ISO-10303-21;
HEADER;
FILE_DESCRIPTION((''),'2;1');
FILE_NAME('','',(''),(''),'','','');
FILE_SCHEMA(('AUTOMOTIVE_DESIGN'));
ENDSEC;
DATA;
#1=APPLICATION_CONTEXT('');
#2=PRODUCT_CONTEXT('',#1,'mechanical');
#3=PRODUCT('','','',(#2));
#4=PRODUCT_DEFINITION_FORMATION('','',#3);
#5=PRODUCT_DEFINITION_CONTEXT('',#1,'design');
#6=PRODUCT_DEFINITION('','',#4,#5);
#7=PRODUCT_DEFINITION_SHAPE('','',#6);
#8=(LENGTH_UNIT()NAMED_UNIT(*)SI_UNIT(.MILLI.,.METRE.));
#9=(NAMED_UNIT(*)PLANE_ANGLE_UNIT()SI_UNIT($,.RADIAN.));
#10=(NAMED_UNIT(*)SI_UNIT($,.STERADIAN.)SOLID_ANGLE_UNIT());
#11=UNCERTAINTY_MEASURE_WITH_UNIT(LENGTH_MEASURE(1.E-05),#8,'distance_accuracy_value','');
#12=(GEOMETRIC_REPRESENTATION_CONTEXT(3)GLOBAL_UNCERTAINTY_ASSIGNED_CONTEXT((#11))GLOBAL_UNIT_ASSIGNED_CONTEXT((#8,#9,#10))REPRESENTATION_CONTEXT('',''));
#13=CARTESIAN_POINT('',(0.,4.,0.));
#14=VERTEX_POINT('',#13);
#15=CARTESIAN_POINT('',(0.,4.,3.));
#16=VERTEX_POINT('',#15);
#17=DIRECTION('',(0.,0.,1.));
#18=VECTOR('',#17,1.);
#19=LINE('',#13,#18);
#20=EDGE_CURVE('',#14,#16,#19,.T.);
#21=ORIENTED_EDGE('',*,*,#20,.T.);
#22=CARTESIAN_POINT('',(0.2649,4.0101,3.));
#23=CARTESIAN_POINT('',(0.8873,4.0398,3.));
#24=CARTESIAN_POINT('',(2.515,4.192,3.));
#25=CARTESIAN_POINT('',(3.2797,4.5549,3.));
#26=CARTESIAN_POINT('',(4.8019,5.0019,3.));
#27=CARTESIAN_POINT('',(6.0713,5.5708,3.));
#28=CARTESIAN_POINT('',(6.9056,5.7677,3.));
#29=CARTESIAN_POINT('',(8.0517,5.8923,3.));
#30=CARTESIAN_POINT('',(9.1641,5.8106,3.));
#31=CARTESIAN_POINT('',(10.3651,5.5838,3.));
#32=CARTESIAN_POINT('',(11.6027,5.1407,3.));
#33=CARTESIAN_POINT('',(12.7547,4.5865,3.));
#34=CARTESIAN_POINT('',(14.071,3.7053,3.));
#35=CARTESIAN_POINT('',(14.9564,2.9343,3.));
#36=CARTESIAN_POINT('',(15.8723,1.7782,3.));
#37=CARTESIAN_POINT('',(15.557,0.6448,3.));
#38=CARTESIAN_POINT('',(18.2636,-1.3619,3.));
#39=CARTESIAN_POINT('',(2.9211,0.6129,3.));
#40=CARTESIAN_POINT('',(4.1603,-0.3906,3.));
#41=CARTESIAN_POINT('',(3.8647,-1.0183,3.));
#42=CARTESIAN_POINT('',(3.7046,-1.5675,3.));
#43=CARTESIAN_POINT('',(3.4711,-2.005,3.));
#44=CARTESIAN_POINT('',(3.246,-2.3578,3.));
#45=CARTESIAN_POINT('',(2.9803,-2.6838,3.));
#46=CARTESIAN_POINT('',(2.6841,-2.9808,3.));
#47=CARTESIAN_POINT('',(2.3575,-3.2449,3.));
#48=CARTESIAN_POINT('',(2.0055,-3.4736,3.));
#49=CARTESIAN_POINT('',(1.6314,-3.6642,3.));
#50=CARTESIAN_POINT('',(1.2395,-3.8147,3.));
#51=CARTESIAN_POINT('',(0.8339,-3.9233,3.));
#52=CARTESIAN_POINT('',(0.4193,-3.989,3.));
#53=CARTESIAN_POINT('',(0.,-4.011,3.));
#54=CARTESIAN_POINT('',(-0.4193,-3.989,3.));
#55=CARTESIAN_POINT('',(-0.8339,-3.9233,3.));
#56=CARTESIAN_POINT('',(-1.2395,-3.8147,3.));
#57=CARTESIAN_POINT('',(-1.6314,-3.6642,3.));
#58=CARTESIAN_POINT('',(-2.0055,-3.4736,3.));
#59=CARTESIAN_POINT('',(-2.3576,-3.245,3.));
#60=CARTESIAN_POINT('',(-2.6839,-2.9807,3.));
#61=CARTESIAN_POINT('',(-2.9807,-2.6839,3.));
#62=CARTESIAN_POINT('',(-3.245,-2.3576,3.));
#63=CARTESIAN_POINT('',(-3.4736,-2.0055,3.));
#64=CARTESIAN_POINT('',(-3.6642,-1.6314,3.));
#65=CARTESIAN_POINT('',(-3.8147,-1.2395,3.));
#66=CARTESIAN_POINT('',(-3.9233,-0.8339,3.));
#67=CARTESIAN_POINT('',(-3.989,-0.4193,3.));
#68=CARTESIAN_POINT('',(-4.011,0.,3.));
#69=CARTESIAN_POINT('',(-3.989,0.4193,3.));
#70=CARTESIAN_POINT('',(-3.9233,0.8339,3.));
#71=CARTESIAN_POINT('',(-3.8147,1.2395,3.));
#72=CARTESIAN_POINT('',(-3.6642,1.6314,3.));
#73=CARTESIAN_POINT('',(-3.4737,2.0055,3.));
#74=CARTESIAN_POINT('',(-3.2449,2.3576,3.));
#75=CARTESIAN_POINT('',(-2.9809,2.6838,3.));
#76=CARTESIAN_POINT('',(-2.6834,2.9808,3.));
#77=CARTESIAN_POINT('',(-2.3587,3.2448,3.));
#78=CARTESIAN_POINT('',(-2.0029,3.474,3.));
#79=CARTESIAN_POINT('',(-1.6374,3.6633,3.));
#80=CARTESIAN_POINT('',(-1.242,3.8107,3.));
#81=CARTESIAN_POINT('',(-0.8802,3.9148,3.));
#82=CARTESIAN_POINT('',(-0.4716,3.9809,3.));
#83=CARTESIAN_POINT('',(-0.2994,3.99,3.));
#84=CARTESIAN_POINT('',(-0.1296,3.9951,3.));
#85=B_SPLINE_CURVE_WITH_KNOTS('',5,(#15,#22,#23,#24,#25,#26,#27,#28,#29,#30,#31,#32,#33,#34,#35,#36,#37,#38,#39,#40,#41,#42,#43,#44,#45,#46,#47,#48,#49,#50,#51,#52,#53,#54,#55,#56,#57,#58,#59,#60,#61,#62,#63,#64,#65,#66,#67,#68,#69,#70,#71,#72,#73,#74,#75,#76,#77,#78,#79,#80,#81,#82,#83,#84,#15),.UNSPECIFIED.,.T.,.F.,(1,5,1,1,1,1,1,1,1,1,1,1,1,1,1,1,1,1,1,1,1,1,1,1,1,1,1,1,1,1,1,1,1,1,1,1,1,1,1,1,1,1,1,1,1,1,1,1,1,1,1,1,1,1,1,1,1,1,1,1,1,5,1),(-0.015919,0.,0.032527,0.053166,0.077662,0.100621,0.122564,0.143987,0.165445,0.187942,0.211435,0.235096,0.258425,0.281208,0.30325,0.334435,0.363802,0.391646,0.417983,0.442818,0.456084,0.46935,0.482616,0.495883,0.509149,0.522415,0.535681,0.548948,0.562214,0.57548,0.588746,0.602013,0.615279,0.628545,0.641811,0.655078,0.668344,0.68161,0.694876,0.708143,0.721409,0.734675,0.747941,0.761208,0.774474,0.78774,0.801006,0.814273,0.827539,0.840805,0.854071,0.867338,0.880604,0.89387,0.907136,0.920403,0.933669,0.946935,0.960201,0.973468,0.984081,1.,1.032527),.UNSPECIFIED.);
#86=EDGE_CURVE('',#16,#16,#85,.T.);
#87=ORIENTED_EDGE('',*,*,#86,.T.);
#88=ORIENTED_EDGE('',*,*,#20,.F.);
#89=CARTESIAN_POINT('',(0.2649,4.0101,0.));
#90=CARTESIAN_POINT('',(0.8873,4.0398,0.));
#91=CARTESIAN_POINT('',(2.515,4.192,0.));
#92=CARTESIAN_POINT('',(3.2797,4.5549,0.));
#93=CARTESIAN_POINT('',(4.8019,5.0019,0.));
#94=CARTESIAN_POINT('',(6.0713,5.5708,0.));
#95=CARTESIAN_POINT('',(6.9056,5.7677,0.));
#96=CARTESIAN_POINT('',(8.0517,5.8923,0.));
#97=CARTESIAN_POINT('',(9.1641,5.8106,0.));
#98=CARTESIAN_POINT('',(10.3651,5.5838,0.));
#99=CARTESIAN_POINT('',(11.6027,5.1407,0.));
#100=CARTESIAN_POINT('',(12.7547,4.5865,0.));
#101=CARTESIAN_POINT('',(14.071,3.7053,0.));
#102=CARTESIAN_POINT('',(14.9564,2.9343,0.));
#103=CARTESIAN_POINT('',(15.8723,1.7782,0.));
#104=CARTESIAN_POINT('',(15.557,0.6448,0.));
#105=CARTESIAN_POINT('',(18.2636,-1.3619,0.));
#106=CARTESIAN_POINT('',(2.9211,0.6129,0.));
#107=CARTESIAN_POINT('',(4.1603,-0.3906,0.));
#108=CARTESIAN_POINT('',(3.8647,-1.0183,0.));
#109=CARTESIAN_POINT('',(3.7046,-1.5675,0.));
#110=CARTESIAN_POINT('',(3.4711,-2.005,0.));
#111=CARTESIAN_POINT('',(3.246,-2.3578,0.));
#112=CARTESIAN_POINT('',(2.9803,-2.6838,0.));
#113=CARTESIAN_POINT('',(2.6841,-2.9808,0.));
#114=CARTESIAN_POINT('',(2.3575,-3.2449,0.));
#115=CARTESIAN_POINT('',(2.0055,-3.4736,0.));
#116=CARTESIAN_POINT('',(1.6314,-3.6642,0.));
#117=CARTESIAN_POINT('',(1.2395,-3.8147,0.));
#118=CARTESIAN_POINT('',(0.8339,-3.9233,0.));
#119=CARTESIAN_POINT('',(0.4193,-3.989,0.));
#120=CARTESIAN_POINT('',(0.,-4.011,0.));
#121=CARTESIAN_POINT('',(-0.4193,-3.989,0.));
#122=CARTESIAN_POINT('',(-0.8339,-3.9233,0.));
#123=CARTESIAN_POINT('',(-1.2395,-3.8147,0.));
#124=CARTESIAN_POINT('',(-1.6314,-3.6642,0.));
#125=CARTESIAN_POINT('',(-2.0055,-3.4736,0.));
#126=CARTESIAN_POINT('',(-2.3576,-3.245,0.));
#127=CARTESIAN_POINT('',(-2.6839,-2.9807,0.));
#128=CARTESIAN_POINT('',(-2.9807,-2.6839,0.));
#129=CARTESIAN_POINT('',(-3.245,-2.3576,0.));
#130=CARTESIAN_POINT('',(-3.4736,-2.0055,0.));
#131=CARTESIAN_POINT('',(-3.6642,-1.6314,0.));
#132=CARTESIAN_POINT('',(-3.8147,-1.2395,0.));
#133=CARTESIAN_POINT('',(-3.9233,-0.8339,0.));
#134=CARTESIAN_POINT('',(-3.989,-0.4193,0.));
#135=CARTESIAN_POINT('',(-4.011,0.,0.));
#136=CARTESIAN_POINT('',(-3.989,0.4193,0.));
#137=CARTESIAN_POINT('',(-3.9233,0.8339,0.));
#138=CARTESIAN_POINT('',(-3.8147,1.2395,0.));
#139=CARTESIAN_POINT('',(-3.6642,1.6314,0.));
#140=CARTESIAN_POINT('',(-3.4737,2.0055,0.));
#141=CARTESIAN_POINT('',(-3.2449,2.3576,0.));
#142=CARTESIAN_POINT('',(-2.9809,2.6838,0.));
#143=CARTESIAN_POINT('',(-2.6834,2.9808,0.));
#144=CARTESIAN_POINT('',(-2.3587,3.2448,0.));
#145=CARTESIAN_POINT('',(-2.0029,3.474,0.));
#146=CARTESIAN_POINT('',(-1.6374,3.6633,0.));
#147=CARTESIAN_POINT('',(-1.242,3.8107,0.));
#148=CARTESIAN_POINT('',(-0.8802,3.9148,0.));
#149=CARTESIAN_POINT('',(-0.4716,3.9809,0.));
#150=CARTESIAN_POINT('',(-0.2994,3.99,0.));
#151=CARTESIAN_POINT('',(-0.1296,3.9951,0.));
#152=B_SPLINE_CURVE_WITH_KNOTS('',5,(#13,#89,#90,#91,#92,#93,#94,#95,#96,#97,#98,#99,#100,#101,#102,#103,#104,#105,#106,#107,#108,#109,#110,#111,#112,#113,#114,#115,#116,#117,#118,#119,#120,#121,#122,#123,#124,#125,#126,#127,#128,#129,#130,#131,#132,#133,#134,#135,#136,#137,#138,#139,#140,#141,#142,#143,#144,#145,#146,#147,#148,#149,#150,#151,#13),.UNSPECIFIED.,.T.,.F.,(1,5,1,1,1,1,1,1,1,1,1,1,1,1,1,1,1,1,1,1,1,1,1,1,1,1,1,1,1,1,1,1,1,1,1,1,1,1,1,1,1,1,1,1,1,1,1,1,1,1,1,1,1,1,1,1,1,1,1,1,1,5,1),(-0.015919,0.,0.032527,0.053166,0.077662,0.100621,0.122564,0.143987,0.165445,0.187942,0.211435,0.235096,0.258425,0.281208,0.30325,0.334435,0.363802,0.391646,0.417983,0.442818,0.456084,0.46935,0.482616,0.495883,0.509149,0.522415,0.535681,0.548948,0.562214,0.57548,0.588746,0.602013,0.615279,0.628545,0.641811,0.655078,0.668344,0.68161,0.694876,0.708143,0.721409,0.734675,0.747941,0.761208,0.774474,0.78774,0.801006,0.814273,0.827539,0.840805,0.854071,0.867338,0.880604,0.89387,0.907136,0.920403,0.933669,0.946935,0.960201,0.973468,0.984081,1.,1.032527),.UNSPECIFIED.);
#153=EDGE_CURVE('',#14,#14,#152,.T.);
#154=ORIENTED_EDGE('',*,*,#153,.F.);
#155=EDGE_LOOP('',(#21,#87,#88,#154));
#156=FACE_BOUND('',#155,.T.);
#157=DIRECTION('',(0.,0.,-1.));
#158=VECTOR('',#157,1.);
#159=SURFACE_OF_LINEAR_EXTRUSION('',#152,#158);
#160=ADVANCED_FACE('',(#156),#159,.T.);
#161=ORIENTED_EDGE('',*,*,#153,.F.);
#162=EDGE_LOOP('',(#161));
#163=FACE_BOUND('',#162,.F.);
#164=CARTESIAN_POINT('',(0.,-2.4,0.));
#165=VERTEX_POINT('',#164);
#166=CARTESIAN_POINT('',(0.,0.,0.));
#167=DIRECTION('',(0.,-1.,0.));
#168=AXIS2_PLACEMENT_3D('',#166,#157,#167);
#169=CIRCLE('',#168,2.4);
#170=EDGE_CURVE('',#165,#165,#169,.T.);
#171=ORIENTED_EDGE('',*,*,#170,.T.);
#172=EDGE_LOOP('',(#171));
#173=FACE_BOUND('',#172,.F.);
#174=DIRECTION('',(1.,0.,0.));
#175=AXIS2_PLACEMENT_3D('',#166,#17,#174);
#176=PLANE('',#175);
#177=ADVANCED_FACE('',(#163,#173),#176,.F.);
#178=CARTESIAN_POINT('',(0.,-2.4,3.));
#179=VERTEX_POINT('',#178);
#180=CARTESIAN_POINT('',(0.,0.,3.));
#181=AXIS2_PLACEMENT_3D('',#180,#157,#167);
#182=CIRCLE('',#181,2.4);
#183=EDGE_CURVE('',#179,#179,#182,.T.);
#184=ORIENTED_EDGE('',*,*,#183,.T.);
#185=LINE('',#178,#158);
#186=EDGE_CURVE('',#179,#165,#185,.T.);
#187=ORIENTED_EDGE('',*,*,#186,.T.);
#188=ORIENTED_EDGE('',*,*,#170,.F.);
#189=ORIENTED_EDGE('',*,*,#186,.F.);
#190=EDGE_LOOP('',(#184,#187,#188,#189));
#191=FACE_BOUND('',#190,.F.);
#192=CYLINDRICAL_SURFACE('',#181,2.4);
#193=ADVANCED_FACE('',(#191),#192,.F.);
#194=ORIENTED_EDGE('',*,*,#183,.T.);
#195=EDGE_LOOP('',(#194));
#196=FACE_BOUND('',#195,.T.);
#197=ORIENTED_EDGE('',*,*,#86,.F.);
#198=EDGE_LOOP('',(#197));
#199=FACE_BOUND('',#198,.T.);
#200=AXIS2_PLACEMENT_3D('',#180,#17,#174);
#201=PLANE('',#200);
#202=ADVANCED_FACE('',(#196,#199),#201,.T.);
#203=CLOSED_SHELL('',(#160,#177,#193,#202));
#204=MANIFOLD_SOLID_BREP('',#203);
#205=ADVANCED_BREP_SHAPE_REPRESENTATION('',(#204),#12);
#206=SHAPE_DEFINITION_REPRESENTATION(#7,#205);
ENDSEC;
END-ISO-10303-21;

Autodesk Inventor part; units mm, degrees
ref_plane "YZ Plane" through (0, 0, 0) normal (1, 0, 0) x (0, 1, 0)
ref_plane "XZ Plane" through (0, 0, 0) normal (0, 1, 0) x (-1, 0, 0)
ref_plane "XY Plane" through (0, 0, 0) normal (0, 0, 1) x (1, 0, 0)
sketch "Hauptskizze" plane through (0, 0, 0) normal (0, 0, 1) x (1, 0, 0)
  spline S0 degree 5 poles (0, 4) (0.2649, 4.0101) (0.8873, 4.0398) (2.515, 4.192) (3.2797, 4.5549) (4.8019, 5.0019) (6.0713, 5.5708) (6.9056, 5.7677) (8.0517, 5.8923) (9.1641, 5.8106) (10.3651, 5.5838) (11.6027, 5.1407) (12.7547, 4.5865) (14.071, 3.7053) (14.9564, 2.9343) (15.8723, 1.7782) (15.557, 0.6448) (18.2636, -1.3619) (2.9211, 0.6129) (4.1603, -0.3906) (3.8647, -1.0183) (3.7046, -1.5675) (3.4711, -2.005) (3.246, -2.3578) (2.9803, -2.6838) (2.6841, -2.9808) (2.3575, -3.2449) (2.0055, -3.4736) (1.6314, -3.6642) (1.2395, -3.8147) (0.8339, -3.9233) (0.4193, -3.989) (0, -4.011) (-0.4193, -3.989) (-0.8339, -3.9233) (-1.2395, -3.8147) (-1.6314, -3.6642) (-2.0055, -3.4736) (-2.3576, -3.245) (-2.6839, -2.9807) (-2.9807, -2.6839) (-3.245, -2.3576) (-3.4736, -2.0055) (-3.6642, -1.6314) (-3.8147, -1.2395) (-3.9233, -0.8339) (-3.989, -0.4193) (-4.011, 0) (-3.989, 0.4193) (-3.9233, 0.8339) (-3.8147, 1.2395) (-3.6642, 1.6314) (-3.4737, 2.0055) (-3.2449, 2.3576) (-2.9809, 2.6838) (-2.6834, 2.9808) (-2.3587, 3.2448) (-2.0029, 3.474) (-1.6374, 3.6633) (-1.242, 3.8107) (-0.8802, 3.9148) (-0.4716, 3.9809) (-0.2994, 3.99) (-0.1296, 3.9951) (0, 4) knots 0 0 0 0 0 0 0.032527 0.053166 0.077662 0.100621 0.122564 0.143987 0.165445 0.187942 0.211435 0.235096 0.258425 0.281208 0.30325 0.334435 0.363802 0.391646 0.417983 0.442818 0.456084 0.46935 0.482616 0.495883 0.509149 0.522415 0.535681 0.548948 0.562214 0.57548 0.588746 0.602013 0.615279 0.628545 0.641811 0.655078 0.668344 0.68161 0.694876 0.708143 0.721409 0.734675 0.747941 0.761208 0.774474 0.78774 0.801006 0.814273 0.827539 0.840805 0.854071 0.867338 0.880604 0.89387 0.907136 0.920403 0.933669 0.946935 0.960201 0.973468 0.984081 1 1 1 1 1 1
  point P0 (3.5001, 4.5934)
  point P1 (4.9198, 5.0905)
  point P2 (6.1373, 5.5405)
  point P3 (6.9964, 5.7503)
  point P4 (7.9845, 5.842)
  point P5 (9.0837, 5.7865)
  point P6 (10.2709, 5.5585)
  point P7 (11.519, 5.1367)
  point P8 (12.7972, 4.5047)
  point P9 (14.0723, 3.6509)
  point P10 (14.9501, 2.8498)
  point P11 (15.5253, 1.9865)
  point P12 (15.88, 1.0198)
  point P13 (16, 0)
  point P14 (3.9781, -0.4181)
  point P15 (3.9126, -0.8316)
  point P16 (3.8042, -1.2361)
  point P17 (3.6542, -1.6269)
  point P18 (3.4641, -2)
  point P19 (3.2361, -2.3511)
  point P20 (2.9726, -2.6765)
  point P21 (2.6765, -2.9726)
  point P22 (2.3511, -3.2361)
  point P23 (2, -3.4641)
  point P24 (1.6269, -3.6542)
  point P25 (1.2361, -3.8042)
  point P26 (0.8316, -3.9126)
  point P27 (0.4181, -3.9781)
  point P28 (0, -4)
  point P29 (-0.4181, -3.9781)
  point P30 (-0.8316, -3.9126)
  point P31 (-1.2361, -3.8042)
  point P32 (-1.6269, -3.6542)
  point P33 (-2, -3.4641)
  point P34 (-2.3511, -3.2361)
  point P35 (-2.6765, -2.9726)
  point P36 (-2.9726, -2.6765)
  point P37 (-3.2361, -2.3511)
  point P38 (-3.4641, -2)
  point P39 (-3.6542, -1.6269)
  point P40 (-3.8042, -1.2361)
  point P41 (-3.9126, -0.8316)
  point P42 (-3.9781, -0.4181)
  point P43 (-4, 0)
  point P44 (-3.9781, 0.4181)
  point P45 (-3.9126, 0.8316)
  point P46 (-3.8042, 1.2361)
  point P47 (-3.6542, 1.6269)
  point P48 (-3.4641, 2)
  point P49 (-3.2361, 2.3511)
  point P50 (-2.9726, 2.6765)
  point P51 (-2.6765, 2.9726)
  point P52 (-2.3511, 3.2361)
  point P53 (-2, 3.4641)
  point P54 (-1.6269, 3.6542)
  point P55 (-1.2361, 3.8042)
  point P56 (-0.8316, 3.9126)
  point P57 (-0.4181, 3.9781)
extrude "Nocken" add sketch "Hauptskizze" along normal blind 3
sketch "Skizze2" plane through (0, 0, 3) normal (0, 0, 1) x (1, 0, 0)
  point P0 (0, 0)
hole "Bohrung1" at (0, 0, 3) direction (0, 0, -1) diameter 4.8 depth 8.8
properties part number "Kurvenscheibe" material "Stainless Steel, Austenitic"
